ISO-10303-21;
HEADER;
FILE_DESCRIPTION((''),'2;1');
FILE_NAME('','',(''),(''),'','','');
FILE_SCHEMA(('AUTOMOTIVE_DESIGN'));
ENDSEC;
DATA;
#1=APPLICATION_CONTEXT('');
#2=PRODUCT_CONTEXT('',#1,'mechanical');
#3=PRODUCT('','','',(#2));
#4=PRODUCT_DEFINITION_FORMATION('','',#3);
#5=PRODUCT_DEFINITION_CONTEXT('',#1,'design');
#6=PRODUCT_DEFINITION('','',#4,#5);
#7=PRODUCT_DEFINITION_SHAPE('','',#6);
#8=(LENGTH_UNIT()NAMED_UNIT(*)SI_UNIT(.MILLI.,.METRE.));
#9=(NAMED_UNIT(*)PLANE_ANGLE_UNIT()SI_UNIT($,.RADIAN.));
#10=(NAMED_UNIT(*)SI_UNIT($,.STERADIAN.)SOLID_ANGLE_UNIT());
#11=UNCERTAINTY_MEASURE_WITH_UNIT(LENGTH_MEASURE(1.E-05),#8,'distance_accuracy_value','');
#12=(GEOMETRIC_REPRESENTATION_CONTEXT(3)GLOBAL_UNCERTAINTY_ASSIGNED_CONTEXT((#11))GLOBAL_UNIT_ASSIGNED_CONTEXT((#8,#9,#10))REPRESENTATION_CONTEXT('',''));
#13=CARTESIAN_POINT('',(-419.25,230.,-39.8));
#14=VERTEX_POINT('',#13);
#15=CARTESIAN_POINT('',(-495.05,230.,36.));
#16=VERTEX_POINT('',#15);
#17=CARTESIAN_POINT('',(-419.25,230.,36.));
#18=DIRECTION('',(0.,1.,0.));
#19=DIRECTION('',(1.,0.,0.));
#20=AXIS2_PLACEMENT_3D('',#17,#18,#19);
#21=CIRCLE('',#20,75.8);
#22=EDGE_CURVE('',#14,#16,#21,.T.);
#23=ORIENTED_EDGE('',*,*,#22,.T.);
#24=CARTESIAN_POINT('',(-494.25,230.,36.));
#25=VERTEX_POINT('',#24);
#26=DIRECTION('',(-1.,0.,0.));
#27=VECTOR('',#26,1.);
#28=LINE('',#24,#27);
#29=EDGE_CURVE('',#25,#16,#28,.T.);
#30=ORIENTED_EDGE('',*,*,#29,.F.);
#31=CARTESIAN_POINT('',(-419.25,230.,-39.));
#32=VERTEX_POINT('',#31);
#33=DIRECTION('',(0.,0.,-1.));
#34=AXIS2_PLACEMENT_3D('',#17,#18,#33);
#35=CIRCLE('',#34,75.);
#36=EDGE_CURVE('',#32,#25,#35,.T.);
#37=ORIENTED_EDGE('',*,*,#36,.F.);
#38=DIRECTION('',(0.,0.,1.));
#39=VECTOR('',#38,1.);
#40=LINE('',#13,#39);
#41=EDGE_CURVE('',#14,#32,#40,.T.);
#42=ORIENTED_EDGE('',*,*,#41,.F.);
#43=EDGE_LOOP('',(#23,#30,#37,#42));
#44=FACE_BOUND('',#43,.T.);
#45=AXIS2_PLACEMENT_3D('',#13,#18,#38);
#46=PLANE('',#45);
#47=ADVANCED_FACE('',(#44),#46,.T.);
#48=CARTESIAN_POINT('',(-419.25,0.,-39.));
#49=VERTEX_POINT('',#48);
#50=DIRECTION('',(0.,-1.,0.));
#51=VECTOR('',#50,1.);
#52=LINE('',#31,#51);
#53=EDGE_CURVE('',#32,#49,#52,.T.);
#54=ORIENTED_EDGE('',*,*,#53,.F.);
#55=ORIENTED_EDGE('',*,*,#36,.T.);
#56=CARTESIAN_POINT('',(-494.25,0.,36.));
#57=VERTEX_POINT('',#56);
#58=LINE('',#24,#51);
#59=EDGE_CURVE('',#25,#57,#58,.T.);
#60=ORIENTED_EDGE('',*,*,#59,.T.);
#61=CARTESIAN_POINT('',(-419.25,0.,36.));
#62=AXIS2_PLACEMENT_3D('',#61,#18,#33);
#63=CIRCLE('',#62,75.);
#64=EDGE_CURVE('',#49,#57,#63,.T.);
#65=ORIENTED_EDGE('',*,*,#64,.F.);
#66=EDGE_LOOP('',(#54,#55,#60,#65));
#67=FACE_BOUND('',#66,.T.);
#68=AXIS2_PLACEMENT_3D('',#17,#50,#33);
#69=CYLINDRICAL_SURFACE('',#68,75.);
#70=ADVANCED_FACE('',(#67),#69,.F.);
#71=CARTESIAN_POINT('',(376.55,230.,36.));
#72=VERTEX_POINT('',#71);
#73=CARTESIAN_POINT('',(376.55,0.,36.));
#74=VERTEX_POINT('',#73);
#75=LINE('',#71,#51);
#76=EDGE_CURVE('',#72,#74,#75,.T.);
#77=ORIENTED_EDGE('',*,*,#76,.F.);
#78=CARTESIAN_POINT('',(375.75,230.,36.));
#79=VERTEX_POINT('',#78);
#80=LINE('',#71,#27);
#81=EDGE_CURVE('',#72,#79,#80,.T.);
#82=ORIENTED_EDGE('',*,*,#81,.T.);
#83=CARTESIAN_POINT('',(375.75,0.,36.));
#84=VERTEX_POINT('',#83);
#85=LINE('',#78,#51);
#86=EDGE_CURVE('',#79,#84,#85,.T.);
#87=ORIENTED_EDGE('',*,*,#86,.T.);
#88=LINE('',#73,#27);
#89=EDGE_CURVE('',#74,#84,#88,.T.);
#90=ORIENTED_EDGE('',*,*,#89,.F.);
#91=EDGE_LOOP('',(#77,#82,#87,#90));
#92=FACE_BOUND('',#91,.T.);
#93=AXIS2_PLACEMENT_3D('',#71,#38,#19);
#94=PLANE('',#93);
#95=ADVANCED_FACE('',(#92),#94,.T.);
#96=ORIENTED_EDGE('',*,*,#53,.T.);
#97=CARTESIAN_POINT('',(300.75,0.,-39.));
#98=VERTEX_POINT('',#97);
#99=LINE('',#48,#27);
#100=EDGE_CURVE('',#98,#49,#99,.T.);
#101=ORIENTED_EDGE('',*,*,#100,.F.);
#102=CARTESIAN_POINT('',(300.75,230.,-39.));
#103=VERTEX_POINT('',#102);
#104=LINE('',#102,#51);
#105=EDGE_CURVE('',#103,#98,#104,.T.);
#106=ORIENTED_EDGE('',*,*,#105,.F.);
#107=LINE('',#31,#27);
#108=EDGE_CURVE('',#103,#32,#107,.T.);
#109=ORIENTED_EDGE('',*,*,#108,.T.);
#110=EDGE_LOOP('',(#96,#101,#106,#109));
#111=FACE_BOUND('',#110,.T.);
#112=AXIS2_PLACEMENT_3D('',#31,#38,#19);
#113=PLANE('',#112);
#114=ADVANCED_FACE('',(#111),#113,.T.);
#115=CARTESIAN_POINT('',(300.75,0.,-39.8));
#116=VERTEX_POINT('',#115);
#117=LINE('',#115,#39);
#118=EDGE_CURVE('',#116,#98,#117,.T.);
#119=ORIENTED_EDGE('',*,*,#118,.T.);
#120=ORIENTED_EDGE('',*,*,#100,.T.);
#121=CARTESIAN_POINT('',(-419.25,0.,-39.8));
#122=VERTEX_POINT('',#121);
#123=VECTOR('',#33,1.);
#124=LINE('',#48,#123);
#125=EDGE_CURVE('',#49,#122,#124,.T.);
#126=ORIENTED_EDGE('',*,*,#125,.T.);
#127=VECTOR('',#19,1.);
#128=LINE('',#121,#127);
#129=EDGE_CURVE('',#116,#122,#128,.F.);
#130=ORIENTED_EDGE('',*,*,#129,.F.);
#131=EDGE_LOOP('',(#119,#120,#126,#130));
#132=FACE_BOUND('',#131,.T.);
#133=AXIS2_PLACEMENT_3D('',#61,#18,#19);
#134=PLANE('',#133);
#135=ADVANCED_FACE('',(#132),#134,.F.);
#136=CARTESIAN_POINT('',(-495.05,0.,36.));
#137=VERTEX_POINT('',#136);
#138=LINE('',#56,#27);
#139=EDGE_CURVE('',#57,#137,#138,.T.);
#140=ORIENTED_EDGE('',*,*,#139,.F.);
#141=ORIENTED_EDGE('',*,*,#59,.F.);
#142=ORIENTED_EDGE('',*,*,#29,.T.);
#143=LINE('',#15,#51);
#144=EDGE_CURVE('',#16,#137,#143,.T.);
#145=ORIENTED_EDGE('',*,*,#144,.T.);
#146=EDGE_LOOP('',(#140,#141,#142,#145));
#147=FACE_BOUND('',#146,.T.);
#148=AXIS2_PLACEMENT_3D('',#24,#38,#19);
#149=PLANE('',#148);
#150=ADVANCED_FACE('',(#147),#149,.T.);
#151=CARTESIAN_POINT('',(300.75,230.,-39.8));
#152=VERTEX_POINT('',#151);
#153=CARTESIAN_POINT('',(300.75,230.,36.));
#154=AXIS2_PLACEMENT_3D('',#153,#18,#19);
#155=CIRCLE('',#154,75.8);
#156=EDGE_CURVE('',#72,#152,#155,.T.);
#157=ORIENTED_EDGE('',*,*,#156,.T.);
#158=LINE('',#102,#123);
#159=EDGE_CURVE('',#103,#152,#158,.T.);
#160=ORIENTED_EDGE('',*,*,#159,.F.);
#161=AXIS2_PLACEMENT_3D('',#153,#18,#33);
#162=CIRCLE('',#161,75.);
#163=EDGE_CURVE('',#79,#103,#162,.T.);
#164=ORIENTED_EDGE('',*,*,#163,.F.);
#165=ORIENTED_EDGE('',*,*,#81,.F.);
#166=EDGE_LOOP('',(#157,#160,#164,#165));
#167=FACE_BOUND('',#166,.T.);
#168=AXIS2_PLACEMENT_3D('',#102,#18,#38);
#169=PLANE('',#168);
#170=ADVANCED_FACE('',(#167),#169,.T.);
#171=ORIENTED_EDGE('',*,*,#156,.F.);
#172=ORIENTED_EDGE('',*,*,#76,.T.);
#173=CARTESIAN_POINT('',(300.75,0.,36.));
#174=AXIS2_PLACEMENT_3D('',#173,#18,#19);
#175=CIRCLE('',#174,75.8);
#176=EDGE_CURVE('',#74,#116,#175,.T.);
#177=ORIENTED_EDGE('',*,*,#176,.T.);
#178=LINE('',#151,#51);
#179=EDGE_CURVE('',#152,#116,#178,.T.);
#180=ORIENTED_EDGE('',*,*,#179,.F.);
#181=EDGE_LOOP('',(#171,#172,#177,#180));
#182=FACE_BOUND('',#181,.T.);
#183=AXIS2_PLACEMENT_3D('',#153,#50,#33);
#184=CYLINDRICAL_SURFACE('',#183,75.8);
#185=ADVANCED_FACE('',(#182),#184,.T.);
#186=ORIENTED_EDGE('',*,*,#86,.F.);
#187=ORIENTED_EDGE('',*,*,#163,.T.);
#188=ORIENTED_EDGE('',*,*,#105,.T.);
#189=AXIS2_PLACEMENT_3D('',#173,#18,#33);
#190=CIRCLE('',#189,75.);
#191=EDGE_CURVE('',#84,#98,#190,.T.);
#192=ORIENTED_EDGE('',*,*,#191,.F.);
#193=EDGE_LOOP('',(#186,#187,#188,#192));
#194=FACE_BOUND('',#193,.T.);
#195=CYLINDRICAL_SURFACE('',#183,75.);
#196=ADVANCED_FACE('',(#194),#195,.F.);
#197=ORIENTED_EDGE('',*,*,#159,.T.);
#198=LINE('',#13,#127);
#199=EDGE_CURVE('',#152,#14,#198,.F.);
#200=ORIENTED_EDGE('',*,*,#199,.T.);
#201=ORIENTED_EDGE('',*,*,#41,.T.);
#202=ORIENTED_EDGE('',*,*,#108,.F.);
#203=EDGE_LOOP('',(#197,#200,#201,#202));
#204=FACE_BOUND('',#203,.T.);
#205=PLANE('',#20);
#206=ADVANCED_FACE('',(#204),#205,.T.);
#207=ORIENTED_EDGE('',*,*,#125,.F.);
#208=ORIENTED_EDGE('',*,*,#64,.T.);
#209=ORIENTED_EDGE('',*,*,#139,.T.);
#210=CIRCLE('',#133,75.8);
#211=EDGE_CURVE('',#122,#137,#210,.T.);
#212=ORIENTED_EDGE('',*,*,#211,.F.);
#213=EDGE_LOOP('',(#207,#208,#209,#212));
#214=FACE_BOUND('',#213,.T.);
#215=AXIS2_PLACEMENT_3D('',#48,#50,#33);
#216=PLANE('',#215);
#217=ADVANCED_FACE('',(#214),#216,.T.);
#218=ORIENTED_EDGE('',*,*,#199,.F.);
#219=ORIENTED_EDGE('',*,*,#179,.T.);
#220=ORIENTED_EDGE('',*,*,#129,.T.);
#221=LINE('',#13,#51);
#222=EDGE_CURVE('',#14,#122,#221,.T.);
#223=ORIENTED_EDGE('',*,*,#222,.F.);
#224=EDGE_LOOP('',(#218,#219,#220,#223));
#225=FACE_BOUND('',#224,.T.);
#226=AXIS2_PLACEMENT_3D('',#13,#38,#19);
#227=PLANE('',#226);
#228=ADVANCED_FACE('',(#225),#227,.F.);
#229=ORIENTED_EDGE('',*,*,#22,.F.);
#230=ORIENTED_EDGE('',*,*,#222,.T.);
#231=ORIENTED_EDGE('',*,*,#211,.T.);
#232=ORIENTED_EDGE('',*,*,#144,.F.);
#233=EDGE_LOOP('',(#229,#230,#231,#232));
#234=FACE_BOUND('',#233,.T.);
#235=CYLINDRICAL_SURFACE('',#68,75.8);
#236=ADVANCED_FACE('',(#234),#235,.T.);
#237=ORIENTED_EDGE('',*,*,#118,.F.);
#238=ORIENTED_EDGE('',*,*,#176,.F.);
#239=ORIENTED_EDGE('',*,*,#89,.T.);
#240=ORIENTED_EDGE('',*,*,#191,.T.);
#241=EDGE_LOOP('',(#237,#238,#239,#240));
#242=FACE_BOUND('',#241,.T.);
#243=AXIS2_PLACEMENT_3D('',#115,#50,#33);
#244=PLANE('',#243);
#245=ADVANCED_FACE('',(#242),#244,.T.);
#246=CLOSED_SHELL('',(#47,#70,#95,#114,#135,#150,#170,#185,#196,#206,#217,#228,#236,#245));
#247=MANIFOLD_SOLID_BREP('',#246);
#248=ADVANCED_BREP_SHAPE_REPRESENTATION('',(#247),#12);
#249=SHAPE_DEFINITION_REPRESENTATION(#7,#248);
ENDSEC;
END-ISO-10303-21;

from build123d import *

# Parameters (mm, degrees)
BASE_FLANGE1_DEPTH = 230


# Sheet-metal steps are written as plain solids
with BuildPart() as part:
    # Sketch1 → Base-Flange1 (new body)
    with BuildSketch(Plane(origin=(0, 0, 0), x_dir=(1, 0, 0), z_dir=(0, 1, 0))):
        with BuildLine():
            ThreePointArc((-494.25, -36), (-472.283008589, 17.033008589), (-419.25, 39))
            Line((-419.25, 39), (300.75, 39))
            ThreePointArc((300.75, 39), (353.783008589, 17.033008589), (375.75, -36))
            Line((375.75, -36), (376.55, -36))
            ThreePointArc((376.55, -36), (354.348694014, 17.598694014), (300.75, 39.8))
            Line((300.75, 39.8), (-419.25, 39.8))
            ThreePointArc((-419.25, 39.8), (-472.848694014, 17.598694014), (-495.05, -36))
            Line((-495.05, -36), (-494.25, -36))
        make_face()
    extrude(amount=BASE_FLANGE1_DEPTH)


solid = part.part
